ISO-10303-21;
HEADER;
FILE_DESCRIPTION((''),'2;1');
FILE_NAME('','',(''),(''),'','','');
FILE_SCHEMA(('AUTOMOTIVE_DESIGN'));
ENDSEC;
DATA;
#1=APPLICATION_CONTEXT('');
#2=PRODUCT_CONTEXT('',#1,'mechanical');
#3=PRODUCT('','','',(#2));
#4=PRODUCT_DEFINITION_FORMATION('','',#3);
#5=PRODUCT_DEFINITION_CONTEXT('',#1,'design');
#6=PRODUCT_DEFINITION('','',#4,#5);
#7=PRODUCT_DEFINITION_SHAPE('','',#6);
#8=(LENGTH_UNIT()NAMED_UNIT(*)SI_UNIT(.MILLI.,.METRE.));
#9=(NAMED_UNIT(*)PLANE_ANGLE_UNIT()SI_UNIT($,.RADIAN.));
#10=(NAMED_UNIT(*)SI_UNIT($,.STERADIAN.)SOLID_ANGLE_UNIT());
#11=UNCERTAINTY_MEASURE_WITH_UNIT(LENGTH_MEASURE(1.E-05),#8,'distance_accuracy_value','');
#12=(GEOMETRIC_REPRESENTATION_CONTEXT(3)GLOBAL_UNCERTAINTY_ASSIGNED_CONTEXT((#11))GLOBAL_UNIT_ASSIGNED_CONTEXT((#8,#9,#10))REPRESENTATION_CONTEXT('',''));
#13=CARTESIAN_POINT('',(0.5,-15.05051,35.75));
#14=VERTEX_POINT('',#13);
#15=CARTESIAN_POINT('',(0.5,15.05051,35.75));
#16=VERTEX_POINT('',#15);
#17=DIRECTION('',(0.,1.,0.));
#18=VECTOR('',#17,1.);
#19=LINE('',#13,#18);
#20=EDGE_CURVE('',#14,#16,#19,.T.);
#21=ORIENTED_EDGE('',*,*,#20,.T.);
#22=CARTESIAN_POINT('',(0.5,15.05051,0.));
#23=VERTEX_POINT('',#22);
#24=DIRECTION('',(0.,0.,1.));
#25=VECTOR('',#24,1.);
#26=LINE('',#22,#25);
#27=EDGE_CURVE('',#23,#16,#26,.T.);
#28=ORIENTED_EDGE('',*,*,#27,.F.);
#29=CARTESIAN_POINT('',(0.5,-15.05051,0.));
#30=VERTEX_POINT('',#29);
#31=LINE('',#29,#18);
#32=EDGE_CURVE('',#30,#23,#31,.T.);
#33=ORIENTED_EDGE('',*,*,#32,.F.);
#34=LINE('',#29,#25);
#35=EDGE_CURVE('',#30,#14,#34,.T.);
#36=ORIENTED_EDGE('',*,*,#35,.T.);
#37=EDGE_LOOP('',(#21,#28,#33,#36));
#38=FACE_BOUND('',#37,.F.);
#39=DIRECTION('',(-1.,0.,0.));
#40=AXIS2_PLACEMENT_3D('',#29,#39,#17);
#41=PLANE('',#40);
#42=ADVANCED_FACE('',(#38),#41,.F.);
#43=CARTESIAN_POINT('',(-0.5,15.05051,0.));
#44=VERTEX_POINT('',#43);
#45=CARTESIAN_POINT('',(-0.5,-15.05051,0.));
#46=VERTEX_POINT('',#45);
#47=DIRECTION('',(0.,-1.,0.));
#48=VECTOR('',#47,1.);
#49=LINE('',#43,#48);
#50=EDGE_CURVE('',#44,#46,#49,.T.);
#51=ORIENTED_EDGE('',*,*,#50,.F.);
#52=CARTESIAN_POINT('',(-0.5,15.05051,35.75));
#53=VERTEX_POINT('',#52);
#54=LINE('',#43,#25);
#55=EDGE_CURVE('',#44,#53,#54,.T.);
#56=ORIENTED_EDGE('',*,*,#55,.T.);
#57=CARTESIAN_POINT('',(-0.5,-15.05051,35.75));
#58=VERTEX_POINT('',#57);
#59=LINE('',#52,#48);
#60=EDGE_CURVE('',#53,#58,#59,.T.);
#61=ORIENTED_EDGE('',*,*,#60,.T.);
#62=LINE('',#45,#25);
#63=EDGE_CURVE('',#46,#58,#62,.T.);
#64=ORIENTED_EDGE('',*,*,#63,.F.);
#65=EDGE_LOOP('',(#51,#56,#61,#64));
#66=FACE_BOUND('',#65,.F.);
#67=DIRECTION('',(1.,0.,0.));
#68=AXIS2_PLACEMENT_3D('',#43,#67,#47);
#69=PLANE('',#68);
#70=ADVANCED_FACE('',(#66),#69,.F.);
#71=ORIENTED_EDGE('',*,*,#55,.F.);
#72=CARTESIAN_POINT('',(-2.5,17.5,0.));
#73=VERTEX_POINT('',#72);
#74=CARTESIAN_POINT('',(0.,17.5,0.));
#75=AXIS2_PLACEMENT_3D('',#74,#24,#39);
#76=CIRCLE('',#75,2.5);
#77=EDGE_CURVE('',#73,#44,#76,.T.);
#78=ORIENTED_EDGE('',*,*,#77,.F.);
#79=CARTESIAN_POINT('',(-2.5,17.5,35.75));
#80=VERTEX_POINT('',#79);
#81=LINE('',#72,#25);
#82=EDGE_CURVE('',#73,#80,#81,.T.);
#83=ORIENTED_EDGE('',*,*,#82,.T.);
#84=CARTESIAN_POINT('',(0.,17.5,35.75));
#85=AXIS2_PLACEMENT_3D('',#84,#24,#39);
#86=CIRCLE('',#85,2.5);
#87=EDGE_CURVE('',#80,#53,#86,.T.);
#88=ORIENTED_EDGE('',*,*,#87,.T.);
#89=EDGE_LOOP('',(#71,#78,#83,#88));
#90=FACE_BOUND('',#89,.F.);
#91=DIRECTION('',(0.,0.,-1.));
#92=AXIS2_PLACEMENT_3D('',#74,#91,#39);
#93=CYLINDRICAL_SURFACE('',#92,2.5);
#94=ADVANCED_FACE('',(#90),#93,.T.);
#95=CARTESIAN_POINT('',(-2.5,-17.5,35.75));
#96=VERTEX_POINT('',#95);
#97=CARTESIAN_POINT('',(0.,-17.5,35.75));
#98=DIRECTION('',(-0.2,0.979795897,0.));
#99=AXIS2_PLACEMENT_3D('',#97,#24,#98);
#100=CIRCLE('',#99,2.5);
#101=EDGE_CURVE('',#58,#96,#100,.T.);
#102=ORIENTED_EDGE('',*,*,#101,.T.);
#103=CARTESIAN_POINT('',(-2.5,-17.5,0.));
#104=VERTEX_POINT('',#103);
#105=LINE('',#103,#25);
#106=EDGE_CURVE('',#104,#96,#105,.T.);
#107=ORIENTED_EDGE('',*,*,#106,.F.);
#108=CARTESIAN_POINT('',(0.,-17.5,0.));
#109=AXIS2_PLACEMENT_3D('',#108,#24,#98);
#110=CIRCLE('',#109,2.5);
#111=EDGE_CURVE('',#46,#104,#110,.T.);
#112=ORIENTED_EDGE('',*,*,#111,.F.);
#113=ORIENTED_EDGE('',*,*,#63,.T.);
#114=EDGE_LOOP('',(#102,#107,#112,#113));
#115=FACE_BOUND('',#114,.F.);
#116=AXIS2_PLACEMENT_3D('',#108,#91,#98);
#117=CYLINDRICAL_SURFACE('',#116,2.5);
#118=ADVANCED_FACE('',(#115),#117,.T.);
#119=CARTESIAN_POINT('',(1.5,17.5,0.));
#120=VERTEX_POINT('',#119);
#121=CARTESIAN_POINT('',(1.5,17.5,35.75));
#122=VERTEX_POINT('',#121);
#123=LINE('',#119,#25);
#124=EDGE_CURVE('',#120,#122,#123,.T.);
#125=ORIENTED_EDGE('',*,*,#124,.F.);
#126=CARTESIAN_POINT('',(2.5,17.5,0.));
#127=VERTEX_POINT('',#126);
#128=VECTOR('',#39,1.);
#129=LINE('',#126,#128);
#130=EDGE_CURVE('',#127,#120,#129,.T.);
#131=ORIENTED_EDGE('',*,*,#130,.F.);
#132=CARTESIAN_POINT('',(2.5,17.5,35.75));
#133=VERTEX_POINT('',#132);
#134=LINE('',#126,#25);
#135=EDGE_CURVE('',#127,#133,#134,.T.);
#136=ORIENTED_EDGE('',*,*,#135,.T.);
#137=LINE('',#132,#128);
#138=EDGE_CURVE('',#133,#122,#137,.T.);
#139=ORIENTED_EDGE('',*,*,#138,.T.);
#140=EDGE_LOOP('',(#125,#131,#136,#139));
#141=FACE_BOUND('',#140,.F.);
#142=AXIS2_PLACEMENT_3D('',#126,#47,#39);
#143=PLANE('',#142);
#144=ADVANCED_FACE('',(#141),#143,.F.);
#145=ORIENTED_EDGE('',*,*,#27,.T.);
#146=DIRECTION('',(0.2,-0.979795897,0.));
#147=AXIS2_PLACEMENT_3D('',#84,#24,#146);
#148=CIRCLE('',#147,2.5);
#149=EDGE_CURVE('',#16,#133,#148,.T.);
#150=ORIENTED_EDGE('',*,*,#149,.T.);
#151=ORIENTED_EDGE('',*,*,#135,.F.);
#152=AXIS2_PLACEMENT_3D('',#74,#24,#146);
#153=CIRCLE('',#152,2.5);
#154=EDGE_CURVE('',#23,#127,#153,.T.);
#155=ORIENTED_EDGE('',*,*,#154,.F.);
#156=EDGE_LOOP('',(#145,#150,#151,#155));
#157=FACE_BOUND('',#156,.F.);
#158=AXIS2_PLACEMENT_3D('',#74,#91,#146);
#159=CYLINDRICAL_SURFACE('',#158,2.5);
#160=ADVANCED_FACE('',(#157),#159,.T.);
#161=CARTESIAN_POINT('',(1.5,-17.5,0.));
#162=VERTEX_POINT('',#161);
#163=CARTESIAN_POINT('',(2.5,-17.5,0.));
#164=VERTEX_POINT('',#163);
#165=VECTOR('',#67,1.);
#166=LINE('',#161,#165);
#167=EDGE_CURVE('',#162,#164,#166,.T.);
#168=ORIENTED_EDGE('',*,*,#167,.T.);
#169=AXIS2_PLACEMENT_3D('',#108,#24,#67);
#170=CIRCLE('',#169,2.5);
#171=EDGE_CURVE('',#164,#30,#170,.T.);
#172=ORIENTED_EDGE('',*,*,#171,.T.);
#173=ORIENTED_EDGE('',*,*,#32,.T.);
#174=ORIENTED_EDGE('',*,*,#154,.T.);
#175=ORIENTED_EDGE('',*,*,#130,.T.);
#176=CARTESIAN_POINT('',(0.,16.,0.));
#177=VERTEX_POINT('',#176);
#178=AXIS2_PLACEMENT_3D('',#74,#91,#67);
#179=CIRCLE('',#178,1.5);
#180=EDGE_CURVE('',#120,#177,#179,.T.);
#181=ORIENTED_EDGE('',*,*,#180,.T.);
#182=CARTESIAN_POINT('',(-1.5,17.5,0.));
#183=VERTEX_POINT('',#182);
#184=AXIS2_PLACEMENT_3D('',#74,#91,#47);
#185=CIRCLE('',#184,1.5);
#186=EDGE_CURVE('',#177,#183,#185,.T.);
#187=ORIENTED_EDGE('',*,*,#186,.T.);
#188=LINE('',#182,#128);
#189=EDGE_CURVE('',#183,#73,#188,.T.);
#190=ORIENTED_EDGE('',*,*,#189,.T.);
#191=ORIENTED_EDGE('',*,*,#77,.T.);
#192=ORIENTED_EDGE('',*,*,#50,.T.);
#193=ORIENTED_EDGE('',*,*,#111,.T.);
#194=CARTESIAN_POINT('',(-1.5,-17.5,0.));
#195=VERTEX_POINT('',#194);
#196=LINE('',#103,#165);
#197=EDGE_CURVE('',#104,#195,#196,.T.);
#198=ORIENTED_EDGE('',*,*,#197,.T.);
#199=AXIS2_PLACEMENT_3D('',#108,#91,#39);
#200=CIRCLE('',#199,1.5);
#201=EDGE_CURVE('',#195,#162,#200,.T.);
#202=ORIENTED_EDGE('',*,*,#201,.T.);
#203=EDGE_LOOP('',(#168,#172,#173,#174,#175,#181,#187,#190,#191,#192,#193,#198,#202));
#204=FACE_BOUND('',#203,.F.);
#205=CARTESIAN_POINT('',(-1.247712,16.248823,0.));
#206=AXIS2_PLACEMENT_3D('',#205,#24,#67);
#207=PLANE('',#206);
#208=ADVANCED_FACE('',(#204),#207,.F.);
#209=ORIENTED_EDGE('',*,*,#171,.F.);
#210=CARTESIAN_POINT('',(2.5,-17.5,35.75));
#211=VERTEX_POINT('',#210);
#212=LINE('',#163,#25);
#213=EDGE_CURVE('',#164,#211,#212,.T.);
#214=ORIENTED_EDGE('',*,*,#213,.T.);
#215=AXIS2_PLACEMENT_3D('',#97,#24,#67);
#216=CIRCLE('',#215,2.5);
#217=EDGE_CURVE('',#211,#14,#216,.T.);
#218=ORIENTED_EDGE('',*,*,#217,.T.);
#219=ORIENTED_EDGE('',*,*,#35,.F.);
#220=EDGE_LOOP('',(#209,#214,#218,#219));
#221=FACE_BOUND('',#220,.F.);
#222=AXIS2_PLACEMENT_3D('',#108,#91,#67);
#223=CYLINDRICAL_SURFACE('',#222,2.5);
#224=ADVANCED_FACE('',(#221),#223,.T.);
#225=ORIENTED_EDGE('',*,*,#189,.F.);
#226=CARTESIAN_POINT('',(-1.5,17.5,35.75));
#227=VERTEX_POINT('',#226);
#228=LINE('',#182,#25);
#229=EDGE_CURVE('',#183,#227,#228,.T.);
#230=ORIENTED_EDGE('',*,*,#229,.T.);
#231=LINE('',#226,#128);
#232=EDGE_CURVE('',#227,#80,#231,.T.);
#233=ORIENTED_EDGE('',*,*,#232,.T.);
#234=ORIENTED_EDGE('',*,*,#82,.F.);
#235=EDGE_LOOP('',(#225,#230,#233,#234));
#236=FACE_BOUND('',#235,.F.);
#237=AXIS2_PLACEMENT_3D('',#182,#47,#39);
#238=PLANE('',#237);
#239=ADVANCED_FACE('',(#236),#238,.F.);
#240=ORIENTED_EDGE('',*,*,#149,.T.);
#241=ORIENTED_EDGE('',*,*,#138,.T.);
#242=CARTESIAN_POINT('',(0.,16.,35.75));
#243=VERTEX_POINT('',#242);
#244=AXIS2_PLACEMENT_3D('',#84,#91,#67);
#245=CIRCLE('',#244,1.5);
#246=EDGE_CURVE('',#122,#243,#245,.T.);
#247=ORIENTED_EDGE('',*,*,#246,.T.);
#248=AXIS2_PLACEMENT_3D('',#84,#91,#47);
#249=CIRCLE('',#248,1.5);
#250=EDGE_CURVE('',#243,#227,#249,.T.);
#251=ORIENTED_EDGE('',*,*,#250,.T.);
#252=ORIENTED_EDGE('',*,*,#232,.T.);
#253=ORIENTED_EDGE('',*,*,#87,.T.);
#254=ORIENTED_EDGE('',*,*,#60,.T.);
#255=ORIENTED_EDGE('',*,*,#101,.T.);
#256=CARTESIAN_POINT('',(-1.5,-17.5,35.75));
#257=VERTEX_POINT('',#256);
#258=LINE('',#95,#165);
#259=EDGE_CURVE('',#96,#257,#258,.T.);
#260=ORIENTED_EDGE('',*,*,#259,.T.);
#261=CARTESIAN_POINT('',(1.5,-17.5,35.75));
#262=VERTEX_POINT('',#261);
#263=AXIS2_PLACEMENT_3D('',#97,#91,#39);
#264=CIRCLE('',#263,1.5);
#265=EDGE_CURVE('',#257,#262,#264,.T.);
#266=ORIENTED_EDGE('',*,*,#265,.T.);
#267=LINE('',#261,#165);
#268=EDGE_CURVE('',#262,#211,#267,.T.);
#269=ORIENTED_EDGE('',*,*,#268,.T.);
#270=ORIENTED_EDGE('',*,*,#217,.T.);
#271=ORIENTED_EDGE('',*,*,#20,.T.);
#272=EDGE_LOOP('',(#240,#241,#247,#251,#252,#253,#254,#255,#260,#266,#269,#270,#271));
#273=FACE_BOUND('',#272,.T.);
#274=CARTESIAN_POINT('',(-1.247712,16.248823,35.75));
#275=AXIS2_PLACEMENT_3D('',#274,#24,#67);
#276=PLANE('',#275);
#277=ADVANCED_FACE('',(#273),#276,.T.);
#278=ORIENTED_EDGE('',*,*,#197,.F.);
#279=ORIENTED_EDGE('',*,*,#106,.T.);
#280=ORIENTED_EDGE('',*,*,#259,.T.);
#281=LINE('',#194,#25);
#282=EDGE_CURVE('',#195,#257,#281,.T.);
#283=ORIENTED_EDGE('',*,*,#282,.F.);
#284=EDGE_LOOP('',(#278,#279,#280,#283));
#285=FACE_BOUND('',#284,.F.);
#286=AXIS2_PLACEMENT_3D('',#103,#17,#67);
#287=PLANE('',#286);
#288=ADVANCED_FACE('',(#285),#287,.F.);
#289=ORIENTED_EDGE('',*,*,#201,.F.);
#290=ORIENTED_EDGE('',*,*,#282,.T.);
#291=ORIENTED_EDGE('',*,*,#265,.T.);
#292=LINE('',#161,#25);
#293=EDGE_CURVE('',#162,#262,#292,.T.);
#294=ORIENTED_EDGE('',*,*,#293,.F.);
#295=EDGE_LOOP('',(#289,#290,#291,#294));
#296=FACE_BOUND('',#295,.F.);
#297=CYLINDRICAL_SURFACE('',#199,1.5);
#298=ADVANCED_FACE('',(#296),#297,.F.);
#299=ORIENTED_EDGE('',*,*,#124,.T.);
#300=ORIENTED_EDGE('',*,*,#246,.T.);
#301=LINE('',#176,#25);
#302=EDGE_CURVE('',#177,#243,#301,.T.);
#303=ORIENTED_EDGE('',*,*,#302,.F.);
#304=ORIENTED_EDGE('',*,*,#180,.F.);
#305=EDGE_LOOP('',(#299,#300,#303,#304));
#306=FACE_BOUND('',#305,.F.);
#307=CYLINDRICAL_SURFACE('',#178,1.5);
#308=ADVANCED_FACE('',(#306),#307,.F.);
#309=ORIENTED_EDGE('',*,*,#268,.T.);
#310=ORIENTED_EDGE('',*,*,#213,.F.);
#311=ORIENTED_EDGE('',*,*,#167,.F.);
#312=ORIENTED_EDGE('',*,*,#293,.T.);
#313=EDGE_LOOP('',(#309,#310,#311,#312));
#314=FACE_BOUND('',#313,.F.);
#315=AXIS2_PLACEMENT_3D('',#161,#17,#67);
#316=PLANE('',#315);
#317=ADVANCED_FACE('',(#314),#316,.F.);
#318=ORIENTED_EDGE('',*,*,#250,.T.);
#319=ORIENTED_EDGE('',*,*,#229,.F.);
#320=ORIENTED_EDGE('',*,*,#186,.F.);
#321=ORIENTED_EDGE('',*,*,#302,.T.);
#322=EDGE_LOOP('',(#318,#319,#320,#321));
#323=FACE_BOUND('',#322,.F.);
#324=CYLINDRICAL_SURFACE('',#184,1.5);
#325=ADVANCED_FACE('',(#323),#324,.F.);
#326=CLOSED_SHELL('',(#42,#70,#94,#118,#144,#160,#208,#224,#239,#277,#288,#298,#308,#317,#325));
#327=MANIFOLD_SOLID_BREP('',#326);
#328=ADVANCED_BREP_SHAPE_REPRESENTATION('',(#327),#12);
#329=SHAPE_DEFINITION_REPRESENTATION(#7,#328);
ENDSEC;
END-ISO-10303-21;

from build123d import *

# Parameters (mm, degrees)
F1_DEPTH = 35.75


# Not quite as in the source:
# - a feature names something its author has since deleted; it is built from what else it names


with BuildPart() as f1:
    # F0 (on Top) → F1 (new body)
    with BuildSketch(Plane.XY):
        with BuildLine():
            ThreePointArc((-0.5, 15.0505102572), (-0.251272405, 15.0126596175), (0, 15))
            Line((0, 15), (0, 16))
            ThreePointArc((0, 16), (-1.0606601718, 16.4393398282), (-1.5, 17.5))
            Line((-1.5, 17.5), (-2.5, 17.5))
            ThreePointArc((-2.5, 17.5), (-1.9364916731, 15.9188611699), (-0.5, 15.0505102572))
        make_face()
        with BuildLine():
            Line((0, 16), (0, 15))
            ThreePointArc((0, 15), (0.251272405, 15.0126596175), (0.5, 15.0505102572))
            ThreePointArc((0.5, 15.0505102572), (1.9364916731, 15.9188611699), (2.5, 17.5))
            Line((2.5, 17.5), (1.5, 17.5))
            ThreePointArc((1.5, 17.5), (1.0606601718, 16.4393398282), (0, 16))
        make_face()
        with BuildLine():
            ThreePointArc((0.5, 15.0505102572), (0.251272405, 15.0126596175), (0, 15))
            ThreePointArc((0, 15), (-0.251272405, 15.0126596175), (-0.5, 15.0505102572))
            Line((-0.5, 15.0505102572), (-0.5, -15.0505102572))
            ThreePointArc((-0.5, -15.0505102572), (0, -15), (0.5, -15.0505102572))
            Line((0.5, -15.0505102572), (0.5, 15.0505102572))
        make_face()
        with BuildLine():
            ThreePointArc((0.5, -15.0505102572), (0, -15), (-0.5, -15.0505102572))
            ThreePointArc((-0.5, -15.0505102572), (-1.9364916731, -15.9188611699), (-2.5, -17.5))
            Line((-2.5, -17.5), (-1.5, -17.5))
            ThreePointArc((-1.5, -17.5), (0, -16), (1.5, -17.5))
            Line((1.5, -17.5), (2.5, -17.5))
            ThreePointArc((2.5, -17.5), (1.9364916731, -15.9188611699), (0.5, -15.0505102572))
        make_face()
    extrude(amount=F1_DEPTH)


solid = f1.part
